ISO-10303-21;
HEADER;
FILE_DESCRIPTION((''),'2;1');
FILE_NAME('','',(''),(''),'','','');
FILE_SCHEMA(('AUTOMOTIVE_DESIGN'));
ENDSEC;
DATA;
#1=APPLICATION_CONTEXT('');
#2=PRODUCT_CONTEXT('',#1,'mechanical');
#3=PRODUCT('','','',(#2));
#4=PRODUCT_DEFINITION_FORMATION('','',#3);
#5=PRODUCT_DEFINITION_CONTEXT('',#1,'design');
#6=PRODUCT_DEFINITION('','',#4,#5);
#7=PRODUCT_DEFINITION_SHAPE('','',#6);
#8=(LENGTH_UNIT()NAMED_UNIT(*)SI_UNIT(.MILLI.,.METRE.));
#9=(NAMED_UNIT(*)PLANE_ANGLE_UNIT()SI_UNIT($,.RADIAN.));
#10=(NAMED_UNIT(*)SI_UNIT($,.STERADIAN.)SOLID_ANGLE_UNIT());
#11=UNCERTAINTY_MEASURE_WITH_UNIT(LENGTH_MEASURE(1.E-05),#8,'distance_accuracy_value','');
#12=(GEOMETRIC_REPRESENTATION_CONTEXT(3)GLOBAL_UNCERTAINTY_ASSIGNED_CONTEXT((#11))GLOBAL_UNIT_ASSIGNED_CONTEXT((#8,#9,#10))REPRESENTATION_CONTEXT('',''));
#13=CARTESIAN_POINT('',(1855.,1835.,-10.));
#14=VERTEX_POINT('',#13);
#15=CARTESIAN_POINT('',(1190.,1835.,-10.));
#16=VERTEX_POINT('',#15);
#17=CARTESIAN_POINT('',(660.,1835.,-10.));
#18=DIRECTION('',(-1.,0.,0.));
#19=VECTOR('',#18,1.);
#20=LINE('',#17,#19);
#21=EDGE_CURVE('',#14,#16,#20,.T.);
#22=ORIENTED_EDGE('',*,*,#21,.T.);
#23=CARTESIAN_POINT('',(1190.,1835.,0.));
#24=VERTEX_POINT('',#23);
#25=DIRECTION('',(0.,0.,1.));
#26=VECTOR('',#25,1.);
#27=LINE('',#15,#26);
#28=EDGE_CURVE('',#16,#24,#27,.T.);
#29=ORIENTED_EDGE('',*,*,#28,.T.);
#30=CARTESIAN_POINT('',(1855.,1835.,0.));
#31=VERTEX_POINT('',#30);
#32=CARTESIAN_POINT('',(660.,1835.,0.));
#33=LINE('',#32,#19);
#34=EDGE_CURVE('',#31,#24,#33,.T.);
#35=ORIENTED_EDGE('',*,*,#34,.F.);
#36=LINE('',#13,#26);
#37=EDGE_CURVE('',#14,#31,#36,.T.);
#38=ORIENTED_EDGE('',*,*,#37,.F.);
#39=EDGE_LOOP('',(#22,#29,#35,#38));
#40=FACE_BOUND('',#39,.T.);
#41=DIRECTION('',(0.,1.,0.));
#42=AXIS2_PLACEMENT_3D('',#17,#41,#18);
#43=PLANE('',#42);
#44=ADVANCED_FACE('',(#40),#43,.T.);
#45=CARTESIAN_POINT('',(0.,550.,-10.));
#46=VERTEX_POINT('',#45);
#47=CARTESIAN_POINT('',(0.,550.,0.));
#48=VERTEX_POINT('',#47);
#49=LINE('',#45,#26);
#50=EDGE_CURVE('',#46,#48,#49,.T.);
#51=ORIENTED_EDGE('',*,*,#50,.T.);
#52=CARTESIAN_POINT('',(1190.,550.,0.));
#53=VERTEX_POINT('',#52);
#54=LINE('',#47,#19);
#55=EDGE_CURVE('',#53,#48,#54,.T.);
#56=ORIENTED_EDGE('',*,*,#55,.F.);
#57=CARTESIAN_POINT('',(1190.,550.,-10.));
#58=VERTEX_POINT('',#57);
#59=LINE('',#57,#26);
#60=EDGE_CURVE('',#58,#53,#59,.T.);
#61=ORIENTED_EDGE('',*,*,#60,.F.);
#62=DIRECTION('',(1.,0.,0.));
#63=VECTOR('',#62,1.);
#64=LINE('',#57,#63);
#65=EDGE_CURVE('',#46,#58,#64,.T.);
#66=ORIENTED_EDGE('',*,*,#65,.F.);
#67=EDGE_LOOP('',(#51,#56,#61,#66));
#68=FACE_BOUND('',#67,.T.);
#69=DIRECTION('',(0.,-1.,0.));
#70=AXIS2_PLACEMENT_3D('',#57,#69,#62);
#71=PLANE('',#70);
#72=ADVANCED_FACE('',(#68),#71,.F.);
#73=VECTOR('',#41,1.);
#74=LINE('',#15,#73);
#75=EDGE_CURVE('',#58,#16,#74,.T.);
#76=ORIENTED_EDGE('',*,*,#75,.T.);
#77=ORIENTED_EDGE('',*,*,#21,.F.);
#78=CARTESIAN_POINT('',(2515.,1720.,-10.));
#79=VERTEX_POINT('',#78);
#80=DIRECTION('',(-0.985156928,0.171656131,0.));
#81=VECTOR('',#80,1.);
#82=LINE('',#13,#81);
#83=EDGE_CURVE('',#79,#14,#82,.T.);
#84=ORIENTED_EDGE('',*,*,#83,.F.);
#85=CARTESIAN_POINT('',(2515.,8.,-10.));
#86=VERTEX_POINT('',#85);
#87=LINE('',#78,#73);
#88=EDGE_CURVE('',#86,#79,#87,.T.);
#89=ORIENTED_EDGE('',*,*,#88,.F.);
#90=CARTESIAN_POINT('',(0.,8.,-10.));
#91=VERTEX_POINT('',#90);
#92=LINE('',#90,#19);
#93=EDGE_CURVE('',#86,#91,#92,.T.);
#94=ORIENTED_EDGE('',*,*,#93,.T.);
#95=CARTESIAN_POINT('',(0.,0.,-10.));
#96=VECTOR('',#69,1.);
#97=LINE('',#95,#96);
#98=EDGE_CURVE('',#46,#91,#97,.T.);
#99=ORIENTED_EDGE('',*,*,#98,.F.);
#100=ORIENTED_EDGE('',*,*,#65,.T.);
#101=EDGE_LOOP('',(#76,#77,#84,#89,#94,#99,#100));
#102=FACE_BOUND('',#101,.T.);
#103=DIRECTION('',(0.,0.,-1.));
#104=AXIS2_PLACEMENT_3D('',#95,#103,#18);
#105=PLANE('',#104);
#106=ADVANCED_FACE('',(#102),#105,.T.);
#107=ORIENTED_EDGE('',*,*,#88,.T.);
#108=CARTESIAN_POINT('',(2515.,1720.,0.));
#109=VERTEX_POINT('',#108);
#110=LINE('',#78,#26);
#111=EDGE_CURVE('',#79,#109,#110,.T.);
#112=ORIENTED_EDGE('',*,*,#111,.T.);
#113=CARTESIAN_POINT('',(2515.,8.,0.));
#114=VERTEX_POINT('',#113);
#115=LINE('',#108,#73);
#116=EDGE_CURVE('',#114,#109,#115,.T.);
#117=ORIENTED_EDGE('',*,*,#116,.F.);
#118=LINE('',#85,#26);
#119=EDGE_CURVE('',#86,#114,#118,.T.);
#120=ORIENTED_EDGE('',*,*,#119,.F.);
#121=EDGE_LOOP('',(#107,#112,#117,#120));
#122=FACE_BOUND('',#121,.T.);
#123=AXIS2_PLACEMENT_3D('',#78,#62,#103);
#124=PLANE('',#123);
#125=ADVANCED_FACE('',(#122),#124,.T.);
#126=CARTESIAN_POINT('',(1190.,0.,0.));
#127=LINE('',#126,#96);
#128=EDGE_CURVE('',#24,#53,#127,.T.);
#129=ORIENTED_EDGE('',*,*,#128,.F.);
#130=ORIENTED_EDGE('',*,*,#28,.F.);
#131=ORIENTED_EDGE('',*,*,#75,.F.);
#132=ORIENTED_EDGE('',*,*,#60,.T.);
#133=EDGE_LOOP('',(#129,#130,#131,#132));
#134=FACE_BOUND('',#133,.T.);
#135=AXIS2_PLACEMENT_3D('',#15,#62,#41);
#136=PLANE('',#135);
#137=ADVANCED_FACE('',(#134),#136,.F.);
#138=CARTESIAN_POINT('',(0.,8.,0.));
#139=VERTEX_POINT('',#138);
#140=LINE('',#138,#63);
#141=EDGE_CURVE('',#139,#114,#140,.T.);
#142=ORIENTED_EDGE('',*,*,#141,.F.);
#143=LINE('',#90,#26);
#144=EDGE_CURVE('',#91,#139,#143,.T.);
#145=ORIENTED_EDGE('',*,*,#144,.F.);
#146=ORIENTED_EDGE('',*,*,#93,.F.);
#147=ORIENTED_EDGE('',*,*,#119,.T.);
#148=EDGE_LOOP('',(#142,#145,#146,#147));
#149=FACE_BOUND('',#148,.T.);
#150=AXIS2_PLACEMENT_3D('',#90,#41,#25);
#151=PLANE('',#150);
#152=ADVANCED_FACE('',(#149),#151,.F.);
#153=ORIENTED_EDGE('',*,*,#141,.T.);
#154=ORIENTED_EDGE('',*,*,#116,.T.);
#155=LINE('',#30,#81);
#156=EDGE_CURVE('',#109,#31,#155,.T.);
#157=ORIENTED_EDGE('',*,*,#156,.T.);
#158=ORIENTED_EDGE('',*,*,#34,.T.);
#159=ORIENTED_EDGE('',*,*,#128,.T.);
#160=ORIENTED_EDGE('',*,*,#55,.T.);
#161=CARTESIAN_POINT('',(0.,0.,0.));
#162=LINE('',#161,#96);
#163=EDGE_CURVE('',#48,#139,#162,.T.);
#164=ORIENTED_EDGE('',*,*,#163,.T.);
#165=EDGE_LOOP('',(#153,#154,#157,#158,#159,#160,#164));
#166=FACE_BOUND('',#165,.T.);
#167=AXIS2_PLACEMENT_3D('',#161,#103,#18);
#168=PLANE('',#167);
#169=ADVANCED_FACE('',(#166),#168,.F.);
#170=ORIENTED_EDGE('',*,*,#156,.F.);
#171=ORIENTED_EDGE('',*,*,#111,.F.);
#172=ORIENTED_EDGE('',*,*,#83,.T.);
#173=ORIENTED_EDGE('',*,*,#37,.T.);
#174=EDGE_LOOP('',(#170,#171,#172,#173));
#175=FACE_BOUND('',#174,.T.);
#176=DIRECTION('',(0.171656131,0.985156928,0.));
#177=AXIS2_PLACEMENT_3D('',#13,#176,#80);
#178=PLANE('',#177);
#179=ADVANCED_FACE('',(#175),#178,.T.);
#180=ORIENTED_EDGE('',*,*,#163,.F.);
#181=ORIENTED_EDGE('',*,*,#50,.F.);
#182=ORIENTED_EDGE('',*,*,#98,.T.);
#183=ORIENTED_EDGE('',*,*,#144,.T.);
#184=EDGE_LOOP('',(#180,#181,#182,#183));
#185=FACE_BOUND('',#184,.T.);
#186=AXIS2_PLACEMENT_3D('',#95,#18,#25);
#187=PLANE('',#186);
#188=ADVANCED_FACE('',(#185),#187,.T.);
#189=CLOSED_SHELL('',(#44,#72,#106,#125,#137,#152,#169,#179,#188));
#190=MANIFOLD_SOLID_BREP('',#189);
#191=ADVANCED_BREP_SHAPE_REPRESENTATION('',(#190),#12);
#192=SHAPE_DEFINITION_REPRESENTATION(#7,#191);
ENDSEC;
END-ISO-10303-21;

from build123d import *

# Parameters (mm, degrees)
TABAN_FLAN_1_DEPTH         = 10
KES_EKSTR_ZYON1_DEPTH      = 3114.286045323
KES_EKSTR_ZYON1_DEPTH_BACK = 3114.286045323
IZIM6_W                    = 1190
IZIM6_H                    = 1285
IZIM6_W_2                  = 2515
IZIM6_H_2                  = 8


# Sheet-metal steps are written as plain solids
with BuildPart() as part:
    # Çizim1 → Taban-Flanş1 (new body)
    with BuildSketch(Plane.XY):
        Polygon((0, 0), (0, 1720), (660, 1835), (1855, 1835), (2515, 1720), (2515, 0), align=None)
    extrude(amount=-TABAN_FLAN_1_DEPTH)

    # Çizim6 → Kes-Ekstrüzyon1 (cut, two sides: drawn at the far end of the back side and taken through both)
    with BuildSketch(Plane.XY.offset(-KES_EKSTR_ZYON1_DEPTH_BACK)):
        with Locations((595, 1192.5)):
            Rectangle(IZIM6_W, IZIM6_H)
        with Locations((1257.5, 4)):
            Rectangle(IZIM6_W_2, IZIM6_H_2)
    extrude(amount=KES_EKSTR_ZYON1_DEPTH + KES_EKSTR_ZYON1_DEPTH_BACK, mode=Mode.SUBTRACT)


solid = part.part
